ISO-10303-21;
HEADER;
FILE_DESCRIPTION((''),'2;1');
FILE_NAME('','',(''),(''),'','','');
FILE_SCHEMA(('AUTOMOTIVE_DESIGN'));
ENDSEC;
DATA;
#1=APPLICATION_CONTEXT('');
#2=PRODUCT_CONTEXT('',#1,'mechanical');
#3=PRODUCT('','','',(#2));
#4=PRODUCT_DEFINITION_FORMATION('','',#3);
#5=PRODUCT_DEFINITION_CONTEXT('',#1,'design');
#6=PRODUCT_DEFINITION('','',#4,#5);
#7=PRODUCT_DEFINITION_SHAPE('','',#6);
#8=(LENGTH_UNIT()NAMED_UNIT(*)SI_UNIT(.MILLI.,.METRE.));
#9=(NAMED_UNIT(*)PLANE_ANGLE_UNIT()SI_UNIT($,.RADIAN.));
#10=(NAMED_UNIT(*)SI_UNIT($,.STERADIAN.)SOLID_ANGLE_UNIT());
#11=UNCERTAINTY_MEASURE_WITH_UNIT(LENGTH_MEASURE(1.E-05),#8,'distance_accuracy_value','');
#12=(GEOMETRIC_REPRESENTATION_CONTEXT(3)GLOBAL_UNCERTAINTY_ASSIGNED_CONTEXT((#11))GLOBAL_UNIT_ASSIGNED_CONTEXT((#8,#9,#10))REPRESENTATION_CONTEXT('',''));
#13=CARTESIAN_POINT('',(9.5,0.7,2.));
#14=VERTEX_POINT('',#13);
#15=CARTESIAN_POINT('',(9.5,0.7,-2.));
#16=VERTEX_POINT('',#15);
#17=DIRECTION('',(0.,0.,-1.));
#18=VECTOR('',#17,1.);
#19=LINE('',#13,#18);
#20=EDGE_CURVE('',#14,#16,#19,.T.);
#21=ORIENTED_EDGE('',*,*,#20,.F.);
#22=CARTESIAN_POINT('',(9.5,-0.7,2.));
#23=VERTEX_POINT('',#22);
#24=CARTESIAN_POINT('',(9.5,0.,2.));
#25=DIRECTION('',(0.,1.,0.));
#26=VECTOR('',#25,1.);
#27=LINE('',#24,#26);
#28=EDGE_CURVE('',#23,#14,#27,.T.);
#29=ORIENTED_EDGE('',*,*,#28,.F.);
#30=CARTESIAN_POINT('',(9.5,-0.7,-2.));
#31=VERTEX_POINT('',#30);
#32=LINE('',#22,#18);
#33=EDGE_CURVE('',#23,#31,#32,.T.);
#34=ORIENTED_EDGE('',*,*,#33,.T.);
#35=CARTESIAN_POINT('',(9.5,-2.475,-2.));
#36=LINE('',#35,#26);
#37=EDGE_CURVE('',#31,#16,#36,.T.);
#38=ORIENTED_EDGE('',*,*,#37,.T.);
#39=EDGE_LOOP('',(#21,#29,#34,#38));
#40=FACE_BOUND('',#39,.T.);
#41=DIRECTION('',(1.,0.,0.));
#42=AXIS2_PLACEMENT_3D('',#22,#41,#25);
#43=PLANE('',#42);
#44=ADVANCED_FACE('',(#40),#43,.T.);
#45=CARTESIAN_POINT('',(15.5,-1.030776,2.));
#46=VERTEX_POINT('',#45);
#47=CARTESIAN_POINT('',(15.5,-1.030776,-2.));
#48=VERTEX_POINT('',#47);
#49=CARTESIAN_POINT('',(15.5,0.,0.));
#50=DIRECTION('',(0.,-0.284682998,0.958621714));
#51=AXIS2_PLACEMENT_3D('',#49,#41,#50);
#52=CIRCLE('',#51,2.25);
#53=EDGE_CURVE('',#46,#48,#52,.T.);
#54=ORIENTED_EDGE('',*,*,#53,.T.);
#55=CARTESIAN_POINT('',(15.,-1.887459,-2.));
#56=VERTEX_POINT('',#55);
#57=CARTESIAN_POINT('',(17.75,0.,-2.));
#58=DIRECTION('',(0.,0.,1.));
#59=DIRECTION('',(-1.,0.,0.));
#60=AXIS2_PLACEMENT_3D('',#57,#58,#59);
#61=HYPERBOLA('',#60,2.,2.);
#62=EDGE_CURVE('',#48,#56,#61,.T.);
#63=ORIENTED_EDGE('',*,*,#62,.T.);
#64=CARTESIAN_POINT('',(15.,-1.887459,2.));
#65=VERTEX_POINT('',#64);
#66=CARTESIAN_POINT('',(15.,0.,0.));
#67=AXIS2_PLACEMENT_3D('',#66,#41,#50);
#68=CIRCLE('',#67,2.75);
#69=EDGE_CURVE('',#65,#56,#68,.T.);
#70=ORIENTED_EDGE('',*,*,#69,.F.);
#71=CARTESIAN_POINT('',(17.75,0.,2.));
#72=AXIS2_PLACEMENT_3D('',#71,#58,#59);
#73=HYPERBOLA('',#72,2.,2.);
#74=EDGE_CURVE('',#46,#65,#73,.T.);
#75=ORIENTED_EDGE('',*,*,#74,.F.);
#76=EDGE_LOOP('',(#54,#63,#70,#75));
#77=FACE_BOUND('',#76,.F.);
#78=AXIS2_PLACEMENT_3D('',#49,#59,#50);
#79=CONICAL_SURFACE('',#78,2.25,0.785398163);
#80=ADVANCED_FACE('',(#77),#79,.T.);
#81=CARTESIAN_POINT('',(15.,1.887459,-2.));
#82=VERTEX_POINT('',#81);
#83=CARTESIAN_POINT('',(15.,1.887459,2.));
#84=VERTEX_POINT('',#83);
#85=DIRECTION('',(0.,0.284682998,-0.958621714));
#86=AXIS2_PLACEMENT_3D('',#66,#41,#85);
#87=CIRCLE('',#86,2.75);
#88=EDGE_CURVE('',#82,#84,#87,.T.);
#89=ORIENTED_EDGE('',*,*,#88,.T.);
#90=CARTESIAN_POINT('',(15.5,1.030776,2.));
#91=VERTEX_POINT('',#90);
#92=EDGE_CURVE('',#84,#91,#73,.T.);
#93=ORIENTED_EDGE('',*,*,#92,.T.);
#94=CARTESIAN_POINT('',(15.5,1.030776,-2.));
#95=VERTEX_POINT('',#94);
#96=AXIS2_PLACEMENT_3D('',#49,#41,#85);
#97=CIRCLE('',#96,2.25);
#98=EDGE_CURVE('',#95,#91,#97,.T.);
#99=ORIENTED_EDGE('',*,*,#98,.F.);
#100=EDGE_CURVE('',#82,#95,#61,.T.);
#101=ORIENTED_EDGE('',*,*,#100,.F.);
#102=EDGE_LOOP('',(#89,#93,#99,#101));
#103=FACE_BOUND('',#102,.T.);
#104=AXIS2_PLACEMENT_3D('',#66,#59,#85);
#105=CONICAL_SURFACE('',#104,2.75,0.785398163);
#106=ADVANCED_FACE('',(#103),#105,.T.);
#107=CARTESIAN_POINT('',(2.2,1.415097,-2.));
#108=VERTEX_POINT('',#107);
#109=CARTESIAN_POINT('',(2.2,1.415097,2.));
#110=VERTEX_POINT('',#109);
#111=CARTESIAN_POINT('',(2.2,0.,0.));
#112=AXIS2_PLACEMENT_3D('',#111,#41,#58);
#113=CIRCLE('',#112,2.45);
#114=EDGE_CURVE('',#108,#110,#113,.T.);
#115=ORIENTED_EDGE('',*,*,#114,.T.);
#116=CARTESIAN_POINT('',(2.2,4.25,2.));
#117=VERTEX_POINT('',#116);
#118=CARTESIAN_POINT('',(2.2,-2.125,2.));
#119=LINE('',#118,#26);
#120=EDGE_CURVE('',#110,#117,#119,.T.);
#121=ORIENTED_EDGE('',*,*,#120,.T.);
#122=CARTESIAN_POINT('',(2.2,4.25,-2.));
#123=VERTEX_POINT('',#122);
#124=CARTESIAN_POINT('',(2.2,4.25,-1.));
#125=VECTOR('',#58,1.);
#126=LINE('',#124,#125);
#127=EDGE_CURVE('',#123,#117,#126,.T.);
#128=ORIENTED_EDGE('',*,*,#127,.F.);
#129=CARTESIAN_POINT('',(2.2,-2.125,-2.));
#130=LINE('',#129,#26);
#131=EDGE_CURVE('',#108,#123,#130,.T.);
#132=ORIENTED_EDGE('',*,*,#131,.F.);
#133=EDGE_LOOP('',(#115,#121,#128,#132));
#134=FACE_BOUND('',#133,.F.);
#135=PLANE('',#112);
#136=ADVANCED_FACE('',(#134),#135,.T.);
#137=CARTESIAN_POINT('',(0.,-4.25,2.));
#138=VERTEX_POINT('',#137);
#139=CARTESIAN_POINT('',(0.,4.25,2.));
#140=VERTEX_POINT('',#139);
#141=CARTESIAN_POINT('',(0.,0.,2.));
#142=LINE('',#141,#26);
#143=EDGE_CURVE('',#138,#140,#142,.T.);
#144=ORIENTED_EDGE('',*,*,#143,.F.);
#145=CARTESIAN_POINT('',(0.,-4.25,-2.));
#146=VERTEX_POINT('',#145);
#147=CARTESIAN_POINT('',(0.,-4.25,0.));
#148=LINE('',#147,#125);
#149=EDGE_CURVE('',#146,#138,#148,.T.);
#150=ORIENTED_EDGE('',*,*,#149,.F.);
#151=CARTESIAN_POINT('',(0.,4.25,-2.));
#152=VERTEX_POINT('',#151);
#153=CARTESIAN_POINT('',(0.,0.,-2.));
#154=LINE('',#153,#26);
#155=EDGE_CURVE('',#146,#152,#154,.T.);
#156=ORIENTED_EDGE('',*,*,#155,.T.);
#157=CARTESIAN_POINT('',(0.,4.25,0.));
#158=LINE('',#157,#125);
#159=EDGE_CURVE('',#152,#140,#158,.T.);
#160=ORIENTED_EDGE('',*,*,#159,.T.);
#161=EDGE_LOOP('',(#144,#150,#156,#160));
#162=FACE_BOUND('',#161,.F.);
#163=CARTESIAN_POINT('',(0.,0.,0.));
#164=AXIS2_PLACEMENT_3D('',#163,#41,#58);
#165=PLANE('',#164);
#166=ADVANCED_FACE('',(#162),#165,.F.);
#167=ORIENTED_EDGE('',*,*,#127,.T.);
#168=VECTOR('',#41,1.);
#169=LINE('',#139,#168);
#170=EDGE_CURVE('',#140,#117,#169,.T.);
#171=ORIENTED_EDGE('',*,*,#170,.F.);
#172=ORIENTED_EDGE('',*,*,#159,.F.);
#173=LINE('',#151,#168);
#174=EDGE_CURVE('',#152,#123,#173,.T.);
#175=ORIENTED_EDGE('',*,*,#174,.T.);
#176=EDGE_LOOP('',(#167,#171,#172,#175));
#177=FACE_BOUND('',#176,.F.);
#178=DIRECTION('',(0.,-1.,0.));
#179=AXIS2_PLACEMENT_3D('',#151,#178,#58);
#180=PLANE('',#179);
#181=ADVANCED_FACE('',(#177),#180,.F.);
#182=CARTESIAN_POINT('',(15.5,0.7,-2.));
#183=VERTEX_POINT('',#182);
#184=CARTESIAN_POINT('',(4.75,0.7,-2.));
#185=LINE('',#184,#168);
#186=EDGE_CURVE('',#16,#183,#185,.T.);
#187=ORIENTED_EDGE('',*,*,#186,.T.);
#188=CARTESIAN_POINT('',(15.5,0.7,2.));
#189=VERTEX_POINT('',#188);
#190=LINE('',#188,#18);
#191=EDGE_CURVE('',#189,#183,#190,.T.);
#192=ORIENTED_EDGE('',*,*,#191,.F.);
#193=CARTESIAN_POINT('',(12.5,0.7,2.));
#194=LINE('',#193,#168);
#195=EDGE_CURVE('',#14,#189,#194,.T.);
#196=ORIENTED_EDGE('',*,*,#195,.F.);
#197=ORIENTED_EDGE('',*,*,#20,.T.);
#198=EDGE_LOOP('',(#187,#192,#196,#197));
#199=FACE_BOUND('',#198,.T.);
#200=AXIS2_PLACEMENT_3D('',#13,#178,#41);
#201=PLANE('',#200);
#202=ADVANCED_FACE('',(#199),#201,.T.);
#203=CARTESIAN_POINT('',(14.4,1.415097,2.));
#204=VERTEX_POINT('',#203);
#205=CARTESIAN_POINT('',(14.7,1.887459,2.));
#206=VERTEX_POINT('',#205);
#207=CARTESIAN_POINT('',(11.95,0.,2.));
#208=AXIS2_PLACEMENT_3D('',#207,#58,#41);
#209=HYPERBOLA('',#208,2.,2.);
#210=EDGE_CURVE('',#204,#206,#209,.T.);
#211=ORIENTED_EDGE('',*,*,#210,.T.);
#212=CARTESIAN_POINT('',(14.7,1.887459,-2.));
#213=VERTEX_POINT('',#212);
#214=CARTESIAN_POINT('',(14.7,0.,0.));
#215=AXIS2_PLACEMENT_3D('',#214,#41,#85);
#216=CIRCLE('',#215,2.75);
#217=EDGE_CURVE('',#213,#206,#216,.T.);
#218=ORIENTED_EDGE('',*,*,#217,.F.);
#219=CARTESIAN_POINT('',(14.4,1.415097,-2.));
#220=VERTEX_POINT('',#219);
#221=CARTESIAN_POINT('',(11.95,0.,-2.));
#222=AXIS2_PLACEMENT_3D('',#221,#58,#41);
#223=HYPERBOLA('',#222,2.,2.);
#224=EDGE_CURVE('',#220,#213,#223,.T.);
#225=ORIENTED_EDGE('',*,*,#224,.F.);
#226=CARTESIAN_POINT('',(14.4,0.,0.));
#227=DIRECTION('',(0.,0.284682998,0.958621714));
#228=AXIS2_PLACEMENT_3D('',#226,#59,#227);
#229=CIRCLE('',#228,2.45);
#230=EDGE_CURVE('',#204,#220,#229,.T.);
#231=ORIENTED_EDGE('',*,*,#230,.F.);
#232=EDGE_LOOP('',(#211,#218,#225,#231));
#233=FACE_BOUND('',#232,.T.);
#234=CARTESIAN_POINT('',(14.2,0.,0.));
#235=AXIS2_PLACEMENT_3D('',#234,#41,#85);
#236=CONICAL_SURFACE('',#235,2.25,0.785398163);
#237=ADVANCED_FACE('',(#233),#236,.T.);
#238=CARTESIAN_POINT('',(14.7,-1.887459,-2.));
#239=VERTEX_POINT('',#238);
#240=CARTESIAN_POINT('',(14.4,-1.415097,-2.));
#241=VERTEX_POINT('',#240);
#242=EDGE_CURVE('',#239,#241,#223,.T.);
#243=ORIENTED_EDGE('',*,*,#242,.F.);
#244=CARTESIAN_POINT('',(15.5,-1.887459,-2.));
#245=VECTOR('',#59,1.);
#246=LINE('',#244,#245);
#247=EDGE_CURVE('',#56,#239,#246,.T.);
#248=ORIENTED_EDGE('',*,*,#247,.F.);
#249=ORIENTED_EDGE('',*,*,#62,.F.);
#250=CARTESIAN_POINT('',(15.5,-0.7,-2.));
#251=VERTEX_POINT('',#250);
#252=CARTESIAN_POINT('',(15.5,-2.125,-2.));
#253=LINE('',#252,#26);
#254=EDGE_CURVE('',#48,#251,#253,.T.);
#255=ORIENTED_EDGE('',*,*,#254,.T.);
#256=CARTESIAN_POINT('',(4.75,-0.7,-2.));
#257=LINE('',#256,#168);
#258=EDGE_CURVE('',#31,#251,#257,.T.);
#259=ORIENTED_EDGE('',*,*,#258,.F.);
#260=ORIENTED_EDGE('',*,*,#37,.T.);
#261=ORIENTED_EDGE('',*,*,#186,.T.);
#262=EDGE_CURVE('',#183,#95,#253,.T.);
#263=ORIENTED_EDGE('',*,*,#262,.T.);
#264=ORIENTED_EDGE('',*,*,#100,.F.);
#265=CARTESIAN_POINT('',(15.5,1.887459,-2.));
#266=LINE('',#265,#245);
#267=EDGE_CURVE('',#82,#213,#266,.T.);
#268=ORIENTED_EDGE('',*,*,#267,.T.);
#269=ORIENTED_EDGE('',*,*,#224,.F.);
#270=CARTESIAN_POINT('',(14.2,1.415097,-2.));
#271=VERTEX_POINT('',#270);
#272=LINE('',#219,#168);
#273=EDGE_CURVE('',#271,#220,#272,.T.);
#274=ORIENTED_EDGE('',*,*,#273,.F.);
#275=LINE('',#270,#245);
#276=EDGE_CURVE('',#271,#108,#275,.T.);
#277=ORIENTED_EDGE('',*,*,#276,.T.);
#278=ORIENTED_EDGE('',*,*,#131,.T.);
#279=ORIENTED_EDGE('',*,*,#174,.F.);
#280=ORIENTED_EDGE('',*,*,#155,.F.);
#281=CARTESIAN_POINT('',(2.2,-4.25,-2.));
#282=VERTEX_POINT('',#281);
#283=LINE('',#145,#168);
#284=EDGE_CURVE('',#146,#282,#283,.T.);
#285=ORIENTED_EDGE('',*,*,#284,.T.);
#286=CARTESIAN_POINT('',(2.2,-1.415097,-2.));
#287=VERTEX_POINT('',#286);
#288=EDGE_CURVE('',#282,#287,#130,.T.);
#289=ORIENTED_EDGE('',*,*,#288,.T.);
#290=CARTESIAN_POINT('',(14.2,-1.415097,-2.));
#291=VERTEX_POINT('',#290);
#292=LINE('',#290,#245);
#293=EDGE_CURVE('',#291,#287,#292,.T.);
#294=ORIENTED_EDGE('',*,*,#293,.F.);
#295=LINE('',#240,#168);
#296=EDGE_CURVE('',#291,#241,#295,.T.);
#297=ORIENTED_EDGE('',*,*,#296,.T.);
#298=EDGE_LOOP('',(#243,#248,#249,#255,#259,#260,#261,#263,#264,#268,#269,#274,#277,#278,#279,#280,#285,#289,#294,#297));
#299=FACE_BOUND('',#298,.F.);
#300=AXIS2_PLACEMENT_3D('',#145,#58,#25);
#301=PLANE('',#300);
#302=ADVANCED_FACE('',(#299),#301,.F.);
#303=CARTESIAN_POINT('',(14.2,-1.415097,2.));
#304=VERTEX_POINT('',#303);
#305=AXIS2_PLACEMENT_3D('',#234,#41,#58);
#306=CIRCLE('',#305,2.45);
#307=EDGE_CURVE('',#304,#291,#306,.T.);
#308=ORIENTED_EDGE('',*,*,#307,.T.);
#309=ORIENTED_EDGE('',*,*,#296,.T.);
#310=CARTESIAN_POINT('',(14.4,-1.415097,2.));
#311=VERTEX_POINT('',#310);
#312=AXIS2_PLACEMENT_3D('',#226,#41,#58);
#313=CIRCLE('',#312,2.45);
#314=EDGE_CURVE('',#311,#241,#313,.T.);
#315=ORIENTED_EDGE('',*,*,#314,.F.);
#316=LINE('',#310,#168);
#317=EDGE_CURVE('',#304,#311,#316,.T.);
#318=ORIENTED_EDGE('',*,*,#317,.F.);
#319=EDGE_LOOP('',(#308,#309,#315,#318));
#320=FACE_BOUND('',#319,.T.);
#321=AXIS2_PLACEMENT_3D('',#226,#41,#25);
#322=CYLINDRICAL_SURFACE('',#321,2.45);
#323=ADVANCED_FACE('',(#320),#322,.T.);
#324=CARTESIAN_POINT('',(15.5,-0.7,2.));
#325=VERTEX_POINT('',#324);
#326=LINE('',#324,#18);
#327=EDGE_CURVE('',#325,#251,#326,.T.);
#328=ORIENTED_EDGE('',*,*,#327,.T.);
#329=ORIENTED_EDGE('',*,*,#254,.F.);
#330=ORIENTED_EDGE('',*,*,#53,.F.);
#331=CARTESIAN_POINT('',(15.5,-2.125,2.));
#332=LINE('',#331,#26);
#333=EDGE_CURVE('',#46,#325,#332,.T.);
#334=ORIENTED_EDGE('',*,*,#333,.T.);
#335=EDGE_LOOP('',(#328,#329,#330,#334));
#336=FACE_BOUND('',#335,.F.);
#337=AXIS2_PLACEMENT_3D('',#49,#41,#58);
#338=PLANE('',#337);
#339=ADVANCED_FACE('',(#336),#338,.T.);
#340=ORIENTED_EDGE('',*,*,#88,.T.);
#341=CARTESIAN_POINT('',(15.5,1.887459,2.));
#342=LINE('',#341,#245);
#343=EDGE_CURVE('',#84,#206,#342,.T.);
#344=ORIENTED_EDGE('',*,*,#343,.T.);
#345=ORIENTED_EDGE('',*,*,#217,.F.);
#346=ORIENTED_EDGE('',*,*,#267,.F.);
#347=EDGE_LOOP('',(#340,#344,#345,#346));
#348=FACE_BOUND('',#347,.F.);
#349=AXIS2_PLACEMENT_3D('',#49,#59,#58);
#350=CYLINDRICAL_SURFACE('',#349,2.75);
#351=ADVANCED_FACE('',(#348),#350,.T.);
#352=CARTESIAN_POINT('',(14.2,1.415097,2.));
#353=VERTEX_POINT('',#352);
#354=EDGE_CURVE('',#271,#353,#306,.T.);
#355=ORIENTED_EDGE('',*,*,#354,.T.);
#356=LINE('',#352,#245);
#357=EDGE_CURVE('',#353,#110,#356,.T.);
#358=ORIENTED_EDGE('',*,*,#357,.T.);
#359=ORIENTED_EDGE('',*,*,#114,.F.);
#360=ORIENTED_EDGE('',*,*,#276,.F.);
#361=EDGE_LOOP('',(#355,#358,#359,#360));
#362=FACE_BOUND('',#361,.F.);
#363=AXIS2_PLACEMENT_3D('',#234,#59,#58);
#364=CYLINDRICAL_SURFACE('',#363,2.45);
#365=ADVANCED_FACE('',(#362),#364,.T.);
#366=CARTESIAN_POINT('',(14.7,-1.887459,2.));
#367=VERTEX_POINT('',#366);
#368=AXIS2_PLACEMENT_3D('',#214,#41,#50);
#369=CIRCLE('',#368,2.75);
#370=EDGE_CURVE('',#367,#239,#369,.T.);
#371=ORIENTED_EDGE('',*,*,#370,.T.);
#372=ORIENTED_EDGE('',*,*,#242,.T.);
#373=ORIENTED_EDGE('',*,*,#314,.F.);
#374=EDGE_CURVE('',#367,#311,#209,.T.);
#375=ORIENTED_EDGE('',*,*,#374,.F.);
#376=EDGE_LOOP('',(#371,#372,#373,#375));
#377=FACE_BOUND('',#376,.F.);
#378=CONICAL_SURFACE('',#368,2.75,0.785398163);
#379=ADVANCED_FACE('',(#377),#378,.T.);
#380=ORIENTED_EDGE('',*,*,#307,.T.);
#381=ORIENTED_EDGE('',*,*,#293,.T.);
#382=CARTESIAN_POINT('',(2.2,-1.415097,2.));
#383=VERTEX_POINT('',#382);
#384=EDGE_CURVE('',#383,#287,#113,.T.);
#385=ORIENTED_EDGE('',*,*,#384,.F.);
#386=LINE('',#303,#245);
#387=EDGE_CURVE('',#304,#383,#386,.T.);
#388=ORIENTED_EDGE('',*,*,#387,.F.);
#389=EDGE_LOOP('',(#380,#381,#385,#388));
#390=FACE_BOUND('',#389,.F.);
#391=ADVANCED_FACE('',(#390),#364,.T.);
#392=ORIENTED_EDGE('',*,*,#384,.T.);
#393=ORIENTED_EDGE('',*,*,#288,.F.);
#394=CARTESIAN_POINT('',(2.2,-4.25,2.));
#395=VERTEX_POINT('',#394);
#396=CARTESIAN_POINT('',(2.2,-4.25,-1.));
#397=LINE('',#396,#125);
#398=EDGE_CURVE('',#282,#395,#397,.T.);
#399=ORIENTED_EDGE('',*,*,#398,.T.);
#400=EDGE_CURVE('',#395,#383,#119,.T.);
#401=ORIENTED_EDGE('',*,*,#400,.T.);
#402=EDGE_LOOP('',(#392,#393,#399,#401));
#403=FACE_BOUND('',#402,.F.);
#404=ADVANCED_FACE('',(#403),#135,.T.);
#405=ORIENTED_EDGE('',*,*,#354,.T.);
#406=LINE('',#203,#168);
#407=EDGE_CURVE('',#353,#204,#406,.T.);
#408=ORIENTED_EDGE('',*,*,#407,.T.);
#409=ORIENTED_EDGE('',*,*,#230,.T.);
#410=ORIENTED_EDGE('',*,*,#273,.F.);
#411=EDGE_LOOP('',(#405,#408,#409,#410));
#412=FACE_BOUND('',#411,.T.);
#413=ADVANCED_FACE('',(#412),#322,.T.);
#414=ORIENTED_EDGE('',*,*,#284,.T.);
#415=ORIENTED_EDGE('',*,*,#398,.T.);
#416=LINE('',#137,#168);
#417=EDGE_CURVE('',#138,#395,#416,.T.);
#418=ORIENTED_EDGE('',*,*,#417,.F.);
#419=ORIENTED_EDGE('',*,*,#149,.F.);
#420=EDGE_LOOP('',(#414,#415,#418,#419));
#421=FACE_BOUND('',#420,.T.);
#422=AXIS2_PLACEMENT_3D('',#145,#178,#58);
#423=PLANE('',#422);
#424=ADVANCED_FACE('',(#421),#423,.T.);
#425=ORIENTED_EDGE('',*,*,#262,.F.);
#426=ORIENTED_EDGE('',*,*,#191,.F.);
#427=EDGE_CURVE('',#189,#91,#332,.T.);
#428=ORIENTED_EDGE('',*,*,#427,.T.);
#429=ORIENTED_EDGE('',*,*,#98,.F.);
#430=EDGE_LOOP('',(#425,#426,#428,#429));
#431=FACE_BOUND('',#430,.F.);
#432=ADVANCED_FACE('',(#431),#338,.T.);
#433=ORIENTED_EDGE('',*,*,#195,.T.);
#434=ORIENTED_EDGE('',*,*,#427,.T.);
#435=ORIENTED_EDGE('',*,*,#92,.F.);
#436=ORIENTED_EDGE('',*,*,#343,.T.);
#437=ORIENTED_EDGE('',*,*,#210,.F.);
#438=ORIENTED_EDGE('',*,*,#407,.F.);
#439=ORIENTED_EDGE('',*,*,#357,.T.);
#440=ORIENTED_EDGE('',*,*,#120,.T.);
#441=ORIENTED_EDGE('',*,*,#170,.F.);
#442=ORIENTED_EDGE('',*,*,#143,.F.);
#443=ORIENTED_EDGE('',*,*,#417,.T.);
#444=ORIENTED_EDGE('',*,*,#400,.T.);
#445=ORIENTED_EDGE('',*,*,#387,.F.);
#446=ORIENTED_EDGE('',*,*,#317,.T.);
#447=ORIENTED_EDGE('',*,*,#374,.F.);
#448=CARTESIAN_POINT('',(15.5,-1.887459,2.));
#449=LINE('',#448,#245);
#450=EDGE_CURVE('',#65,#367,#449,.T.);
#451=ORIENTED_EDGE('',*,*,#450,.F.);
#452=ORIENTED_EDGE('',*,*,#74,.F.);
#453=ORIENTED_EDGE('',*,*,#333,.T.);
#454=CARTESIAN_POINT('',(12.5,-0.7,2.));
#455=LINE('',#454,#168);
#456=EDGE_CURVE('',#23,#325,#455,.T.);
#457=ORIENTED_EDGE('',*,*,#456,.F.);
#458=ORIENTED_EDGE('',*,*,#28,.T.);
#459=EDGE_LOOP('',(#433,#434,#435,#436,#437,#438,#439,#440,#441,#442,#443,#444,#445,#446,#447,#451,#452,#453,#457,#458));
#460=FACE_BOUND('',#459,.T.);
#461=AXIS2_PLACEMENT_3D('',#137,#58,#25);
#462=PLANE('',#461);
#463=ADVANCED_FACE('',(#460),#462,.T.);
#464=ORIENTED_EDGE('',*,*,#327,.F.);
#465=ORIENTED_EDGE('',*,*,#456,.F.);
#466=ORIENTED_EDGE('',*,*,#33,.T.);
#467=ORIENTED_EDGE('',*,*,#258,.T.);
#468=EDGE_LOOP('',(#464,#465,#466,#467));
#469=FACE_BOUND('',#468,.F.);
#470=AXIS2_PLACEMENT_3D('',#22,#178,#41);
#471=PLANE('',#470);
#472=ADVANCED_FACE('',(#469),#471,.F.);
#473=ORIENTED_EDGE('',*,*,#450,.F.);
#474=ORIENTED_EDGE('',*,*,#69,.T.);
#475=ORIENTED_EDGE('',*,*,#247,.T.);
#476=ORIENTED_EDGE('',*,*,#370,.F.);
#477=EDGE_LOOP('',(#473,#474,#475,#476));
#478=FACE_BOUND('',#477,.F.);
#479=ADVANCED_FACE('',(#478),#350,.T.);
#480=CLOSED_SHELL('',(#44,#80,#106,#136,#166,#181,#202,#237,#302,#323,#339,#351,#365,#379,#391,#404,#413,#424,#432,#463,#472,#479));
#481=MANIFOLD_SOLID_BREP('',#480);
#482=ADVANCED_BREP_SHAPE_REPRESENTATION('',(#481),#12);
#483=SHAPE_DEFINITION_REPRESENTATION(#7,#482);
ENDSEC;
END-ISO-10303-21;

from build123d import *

# Parameters (mm, degrees)
F3_W         = 38.5
F3_H         = 34
F3_W_2       = 8.5
F3_H_2       = 4
F4_DEPTH     = 15.501
F5_T4_ANGLE  = 146.9201983829
F5_S5_R      = 2.45
F5_T6_DEPTH  = 4
F5_T10_ANGLE = 146.9201983829
F5_S11_R     = 2.45
F5_T12_DEPTH = 4
F5_T14_ANGLE = 146.9201983829
F5_T16_ANGLE = 146.9201983829
F6_W         = 6
F6_H         = 1.4
F7_DEPTH     = 4.001


# Not quite as in the source:
# - a fillet or chamfer that OpenCascade refuses, or shapes differently, is made with other operations: its cross-section is extruded or revolved along the edge and cut away or added


with BuildPart() as f2:
    # F1 (on Front) → F2 (revolve)
    with BuildSketch(Plane.XZ):
        Polygon((0, 7.5), (0, 0), (15.5, 0), (15.5, 2.75), (14.2, 2.75), (14.2, 2.45), (2.2, 2.45), (2.2, 7.5), align=None)
    revolve(axis=Axis((8.8834212145, 0, 0), (1, 0, 0)))

    # F3 (on Right) → F4 (cut, through all)
    with BuildSketch(Plane.YZ):
        Rectangle(F3_W, F3_H)
        Rectangle(F3_W_2, F3_H_2, mode=Mode.SUBTRACT)
    extrude(amount=F4_DEPTH, mode=Mode.SUBTRACT)

    # F5: chamfer of 0.5 on 4 edges, made by hand


with BuildPart() as f5_tool2:
    # F5_s3 → F5_t4 (revolve)
    with BuildSketch(Plane(origin=(0, 0, 0), x_dir=(1, 0, 0), z_dir=(0, -0.958621714, -0.2846829983))):
        Polygon((14.2, -2.25), (14.7, -2.75), (14.2, -2.75), align=None)
    revolve(axis=Axis((14.2, 0, 0), (1, 0, 0)), revolution_arc=F5_T4_ANGLE)

    # F5_s5 → F5_t6 (cut, symmetric)
    with BuildSketch(Plane.YZ.offset(14.4)):
        Circle(F5_S5_R)
    extrude(amount=F5_T6_DEPTH, both=True, mode=Mode.SUBTRACT)


with BuildPart() as f2_1:
    add(f2.part)

    # F5_t1: cut F5_tool2
    add(f5_tool2.part, mode=Mode.SUBTRACT)


with BuildPart() as f5_tool8:
    # F5_s9 → F5_t10 (revolve)
    with BuildSketch(Plane(origin=(0, 0, 0), x_dir=(1, 0, 0), z_dir=(0, 0.958621714, 0.2846829983))):
        Polygon((14.7, -2.75), (14.2, -2.25), (14.2, -2.75), align=None)
    revolve(axis=Axis((14.2, 0, 0), (1, 0, 0)), revolution_arc=F5_T10_ANGLE)

    # F5_s11 → F5_t12 (cut, symmetric)
    with BuildSketch(Plane.YZ.offset(14.4)):
        Circle(F5_S11_R)
    extrude(amount=F5_T12_DEPTH, both=True, mode=Mode.SUBTRACT)


with BuildPart() as f2_2:
    add(f2_1.part)

    # F5_t7: cut F5_tool8
    add(f5_tool8.part, mode=Mode.SUBTRACT)

    # F5_s13 → F5_t14 (revolve, cut)
    with BuildSketch(Plane(origin=(0, 0, 0), x_dir=(1, 0, 0), z_dir=(0, -0.958621714, -0.2846829983))):
        Polygon((15, -2.75), (15.5, -2.25), (15.5, -2.75), align=None)
    revolve(axis=Axis((15.5, 0, 0), (1, 0, 0)), revolution_arc=F5_T14_ANGLE, mode=Mode.SUBTRACT)

    # F5_s15 → F5_t16 (revolve, cut)
    with BuildSketch(Plane(origin=(0, 0, 0), x_dir=(1, 0, 0), z_dir=(0, 0.958621714, 0.2846829983))):
        Polygon((15.5, -2.25), (15, -2.75), (15.5, -2.75), align=None)
    revolve(axis=Axis((15.5, 0, 0), (1, 0, 0)), revolution_arc=F5_T16_ANGLE, mode=Mode.SUBTRACT)

    # F6 (on face) → F7 (cut, through all)
    with BuildSketch(Plane.XY.offset(2)):
        with Locations((12.5, 0)):
            Rectangle(F6_W, F6_H)
    extrude(amount=-F7_DEPTH, mode=Mode.SUBTRACT)


solid = f2_2.part
